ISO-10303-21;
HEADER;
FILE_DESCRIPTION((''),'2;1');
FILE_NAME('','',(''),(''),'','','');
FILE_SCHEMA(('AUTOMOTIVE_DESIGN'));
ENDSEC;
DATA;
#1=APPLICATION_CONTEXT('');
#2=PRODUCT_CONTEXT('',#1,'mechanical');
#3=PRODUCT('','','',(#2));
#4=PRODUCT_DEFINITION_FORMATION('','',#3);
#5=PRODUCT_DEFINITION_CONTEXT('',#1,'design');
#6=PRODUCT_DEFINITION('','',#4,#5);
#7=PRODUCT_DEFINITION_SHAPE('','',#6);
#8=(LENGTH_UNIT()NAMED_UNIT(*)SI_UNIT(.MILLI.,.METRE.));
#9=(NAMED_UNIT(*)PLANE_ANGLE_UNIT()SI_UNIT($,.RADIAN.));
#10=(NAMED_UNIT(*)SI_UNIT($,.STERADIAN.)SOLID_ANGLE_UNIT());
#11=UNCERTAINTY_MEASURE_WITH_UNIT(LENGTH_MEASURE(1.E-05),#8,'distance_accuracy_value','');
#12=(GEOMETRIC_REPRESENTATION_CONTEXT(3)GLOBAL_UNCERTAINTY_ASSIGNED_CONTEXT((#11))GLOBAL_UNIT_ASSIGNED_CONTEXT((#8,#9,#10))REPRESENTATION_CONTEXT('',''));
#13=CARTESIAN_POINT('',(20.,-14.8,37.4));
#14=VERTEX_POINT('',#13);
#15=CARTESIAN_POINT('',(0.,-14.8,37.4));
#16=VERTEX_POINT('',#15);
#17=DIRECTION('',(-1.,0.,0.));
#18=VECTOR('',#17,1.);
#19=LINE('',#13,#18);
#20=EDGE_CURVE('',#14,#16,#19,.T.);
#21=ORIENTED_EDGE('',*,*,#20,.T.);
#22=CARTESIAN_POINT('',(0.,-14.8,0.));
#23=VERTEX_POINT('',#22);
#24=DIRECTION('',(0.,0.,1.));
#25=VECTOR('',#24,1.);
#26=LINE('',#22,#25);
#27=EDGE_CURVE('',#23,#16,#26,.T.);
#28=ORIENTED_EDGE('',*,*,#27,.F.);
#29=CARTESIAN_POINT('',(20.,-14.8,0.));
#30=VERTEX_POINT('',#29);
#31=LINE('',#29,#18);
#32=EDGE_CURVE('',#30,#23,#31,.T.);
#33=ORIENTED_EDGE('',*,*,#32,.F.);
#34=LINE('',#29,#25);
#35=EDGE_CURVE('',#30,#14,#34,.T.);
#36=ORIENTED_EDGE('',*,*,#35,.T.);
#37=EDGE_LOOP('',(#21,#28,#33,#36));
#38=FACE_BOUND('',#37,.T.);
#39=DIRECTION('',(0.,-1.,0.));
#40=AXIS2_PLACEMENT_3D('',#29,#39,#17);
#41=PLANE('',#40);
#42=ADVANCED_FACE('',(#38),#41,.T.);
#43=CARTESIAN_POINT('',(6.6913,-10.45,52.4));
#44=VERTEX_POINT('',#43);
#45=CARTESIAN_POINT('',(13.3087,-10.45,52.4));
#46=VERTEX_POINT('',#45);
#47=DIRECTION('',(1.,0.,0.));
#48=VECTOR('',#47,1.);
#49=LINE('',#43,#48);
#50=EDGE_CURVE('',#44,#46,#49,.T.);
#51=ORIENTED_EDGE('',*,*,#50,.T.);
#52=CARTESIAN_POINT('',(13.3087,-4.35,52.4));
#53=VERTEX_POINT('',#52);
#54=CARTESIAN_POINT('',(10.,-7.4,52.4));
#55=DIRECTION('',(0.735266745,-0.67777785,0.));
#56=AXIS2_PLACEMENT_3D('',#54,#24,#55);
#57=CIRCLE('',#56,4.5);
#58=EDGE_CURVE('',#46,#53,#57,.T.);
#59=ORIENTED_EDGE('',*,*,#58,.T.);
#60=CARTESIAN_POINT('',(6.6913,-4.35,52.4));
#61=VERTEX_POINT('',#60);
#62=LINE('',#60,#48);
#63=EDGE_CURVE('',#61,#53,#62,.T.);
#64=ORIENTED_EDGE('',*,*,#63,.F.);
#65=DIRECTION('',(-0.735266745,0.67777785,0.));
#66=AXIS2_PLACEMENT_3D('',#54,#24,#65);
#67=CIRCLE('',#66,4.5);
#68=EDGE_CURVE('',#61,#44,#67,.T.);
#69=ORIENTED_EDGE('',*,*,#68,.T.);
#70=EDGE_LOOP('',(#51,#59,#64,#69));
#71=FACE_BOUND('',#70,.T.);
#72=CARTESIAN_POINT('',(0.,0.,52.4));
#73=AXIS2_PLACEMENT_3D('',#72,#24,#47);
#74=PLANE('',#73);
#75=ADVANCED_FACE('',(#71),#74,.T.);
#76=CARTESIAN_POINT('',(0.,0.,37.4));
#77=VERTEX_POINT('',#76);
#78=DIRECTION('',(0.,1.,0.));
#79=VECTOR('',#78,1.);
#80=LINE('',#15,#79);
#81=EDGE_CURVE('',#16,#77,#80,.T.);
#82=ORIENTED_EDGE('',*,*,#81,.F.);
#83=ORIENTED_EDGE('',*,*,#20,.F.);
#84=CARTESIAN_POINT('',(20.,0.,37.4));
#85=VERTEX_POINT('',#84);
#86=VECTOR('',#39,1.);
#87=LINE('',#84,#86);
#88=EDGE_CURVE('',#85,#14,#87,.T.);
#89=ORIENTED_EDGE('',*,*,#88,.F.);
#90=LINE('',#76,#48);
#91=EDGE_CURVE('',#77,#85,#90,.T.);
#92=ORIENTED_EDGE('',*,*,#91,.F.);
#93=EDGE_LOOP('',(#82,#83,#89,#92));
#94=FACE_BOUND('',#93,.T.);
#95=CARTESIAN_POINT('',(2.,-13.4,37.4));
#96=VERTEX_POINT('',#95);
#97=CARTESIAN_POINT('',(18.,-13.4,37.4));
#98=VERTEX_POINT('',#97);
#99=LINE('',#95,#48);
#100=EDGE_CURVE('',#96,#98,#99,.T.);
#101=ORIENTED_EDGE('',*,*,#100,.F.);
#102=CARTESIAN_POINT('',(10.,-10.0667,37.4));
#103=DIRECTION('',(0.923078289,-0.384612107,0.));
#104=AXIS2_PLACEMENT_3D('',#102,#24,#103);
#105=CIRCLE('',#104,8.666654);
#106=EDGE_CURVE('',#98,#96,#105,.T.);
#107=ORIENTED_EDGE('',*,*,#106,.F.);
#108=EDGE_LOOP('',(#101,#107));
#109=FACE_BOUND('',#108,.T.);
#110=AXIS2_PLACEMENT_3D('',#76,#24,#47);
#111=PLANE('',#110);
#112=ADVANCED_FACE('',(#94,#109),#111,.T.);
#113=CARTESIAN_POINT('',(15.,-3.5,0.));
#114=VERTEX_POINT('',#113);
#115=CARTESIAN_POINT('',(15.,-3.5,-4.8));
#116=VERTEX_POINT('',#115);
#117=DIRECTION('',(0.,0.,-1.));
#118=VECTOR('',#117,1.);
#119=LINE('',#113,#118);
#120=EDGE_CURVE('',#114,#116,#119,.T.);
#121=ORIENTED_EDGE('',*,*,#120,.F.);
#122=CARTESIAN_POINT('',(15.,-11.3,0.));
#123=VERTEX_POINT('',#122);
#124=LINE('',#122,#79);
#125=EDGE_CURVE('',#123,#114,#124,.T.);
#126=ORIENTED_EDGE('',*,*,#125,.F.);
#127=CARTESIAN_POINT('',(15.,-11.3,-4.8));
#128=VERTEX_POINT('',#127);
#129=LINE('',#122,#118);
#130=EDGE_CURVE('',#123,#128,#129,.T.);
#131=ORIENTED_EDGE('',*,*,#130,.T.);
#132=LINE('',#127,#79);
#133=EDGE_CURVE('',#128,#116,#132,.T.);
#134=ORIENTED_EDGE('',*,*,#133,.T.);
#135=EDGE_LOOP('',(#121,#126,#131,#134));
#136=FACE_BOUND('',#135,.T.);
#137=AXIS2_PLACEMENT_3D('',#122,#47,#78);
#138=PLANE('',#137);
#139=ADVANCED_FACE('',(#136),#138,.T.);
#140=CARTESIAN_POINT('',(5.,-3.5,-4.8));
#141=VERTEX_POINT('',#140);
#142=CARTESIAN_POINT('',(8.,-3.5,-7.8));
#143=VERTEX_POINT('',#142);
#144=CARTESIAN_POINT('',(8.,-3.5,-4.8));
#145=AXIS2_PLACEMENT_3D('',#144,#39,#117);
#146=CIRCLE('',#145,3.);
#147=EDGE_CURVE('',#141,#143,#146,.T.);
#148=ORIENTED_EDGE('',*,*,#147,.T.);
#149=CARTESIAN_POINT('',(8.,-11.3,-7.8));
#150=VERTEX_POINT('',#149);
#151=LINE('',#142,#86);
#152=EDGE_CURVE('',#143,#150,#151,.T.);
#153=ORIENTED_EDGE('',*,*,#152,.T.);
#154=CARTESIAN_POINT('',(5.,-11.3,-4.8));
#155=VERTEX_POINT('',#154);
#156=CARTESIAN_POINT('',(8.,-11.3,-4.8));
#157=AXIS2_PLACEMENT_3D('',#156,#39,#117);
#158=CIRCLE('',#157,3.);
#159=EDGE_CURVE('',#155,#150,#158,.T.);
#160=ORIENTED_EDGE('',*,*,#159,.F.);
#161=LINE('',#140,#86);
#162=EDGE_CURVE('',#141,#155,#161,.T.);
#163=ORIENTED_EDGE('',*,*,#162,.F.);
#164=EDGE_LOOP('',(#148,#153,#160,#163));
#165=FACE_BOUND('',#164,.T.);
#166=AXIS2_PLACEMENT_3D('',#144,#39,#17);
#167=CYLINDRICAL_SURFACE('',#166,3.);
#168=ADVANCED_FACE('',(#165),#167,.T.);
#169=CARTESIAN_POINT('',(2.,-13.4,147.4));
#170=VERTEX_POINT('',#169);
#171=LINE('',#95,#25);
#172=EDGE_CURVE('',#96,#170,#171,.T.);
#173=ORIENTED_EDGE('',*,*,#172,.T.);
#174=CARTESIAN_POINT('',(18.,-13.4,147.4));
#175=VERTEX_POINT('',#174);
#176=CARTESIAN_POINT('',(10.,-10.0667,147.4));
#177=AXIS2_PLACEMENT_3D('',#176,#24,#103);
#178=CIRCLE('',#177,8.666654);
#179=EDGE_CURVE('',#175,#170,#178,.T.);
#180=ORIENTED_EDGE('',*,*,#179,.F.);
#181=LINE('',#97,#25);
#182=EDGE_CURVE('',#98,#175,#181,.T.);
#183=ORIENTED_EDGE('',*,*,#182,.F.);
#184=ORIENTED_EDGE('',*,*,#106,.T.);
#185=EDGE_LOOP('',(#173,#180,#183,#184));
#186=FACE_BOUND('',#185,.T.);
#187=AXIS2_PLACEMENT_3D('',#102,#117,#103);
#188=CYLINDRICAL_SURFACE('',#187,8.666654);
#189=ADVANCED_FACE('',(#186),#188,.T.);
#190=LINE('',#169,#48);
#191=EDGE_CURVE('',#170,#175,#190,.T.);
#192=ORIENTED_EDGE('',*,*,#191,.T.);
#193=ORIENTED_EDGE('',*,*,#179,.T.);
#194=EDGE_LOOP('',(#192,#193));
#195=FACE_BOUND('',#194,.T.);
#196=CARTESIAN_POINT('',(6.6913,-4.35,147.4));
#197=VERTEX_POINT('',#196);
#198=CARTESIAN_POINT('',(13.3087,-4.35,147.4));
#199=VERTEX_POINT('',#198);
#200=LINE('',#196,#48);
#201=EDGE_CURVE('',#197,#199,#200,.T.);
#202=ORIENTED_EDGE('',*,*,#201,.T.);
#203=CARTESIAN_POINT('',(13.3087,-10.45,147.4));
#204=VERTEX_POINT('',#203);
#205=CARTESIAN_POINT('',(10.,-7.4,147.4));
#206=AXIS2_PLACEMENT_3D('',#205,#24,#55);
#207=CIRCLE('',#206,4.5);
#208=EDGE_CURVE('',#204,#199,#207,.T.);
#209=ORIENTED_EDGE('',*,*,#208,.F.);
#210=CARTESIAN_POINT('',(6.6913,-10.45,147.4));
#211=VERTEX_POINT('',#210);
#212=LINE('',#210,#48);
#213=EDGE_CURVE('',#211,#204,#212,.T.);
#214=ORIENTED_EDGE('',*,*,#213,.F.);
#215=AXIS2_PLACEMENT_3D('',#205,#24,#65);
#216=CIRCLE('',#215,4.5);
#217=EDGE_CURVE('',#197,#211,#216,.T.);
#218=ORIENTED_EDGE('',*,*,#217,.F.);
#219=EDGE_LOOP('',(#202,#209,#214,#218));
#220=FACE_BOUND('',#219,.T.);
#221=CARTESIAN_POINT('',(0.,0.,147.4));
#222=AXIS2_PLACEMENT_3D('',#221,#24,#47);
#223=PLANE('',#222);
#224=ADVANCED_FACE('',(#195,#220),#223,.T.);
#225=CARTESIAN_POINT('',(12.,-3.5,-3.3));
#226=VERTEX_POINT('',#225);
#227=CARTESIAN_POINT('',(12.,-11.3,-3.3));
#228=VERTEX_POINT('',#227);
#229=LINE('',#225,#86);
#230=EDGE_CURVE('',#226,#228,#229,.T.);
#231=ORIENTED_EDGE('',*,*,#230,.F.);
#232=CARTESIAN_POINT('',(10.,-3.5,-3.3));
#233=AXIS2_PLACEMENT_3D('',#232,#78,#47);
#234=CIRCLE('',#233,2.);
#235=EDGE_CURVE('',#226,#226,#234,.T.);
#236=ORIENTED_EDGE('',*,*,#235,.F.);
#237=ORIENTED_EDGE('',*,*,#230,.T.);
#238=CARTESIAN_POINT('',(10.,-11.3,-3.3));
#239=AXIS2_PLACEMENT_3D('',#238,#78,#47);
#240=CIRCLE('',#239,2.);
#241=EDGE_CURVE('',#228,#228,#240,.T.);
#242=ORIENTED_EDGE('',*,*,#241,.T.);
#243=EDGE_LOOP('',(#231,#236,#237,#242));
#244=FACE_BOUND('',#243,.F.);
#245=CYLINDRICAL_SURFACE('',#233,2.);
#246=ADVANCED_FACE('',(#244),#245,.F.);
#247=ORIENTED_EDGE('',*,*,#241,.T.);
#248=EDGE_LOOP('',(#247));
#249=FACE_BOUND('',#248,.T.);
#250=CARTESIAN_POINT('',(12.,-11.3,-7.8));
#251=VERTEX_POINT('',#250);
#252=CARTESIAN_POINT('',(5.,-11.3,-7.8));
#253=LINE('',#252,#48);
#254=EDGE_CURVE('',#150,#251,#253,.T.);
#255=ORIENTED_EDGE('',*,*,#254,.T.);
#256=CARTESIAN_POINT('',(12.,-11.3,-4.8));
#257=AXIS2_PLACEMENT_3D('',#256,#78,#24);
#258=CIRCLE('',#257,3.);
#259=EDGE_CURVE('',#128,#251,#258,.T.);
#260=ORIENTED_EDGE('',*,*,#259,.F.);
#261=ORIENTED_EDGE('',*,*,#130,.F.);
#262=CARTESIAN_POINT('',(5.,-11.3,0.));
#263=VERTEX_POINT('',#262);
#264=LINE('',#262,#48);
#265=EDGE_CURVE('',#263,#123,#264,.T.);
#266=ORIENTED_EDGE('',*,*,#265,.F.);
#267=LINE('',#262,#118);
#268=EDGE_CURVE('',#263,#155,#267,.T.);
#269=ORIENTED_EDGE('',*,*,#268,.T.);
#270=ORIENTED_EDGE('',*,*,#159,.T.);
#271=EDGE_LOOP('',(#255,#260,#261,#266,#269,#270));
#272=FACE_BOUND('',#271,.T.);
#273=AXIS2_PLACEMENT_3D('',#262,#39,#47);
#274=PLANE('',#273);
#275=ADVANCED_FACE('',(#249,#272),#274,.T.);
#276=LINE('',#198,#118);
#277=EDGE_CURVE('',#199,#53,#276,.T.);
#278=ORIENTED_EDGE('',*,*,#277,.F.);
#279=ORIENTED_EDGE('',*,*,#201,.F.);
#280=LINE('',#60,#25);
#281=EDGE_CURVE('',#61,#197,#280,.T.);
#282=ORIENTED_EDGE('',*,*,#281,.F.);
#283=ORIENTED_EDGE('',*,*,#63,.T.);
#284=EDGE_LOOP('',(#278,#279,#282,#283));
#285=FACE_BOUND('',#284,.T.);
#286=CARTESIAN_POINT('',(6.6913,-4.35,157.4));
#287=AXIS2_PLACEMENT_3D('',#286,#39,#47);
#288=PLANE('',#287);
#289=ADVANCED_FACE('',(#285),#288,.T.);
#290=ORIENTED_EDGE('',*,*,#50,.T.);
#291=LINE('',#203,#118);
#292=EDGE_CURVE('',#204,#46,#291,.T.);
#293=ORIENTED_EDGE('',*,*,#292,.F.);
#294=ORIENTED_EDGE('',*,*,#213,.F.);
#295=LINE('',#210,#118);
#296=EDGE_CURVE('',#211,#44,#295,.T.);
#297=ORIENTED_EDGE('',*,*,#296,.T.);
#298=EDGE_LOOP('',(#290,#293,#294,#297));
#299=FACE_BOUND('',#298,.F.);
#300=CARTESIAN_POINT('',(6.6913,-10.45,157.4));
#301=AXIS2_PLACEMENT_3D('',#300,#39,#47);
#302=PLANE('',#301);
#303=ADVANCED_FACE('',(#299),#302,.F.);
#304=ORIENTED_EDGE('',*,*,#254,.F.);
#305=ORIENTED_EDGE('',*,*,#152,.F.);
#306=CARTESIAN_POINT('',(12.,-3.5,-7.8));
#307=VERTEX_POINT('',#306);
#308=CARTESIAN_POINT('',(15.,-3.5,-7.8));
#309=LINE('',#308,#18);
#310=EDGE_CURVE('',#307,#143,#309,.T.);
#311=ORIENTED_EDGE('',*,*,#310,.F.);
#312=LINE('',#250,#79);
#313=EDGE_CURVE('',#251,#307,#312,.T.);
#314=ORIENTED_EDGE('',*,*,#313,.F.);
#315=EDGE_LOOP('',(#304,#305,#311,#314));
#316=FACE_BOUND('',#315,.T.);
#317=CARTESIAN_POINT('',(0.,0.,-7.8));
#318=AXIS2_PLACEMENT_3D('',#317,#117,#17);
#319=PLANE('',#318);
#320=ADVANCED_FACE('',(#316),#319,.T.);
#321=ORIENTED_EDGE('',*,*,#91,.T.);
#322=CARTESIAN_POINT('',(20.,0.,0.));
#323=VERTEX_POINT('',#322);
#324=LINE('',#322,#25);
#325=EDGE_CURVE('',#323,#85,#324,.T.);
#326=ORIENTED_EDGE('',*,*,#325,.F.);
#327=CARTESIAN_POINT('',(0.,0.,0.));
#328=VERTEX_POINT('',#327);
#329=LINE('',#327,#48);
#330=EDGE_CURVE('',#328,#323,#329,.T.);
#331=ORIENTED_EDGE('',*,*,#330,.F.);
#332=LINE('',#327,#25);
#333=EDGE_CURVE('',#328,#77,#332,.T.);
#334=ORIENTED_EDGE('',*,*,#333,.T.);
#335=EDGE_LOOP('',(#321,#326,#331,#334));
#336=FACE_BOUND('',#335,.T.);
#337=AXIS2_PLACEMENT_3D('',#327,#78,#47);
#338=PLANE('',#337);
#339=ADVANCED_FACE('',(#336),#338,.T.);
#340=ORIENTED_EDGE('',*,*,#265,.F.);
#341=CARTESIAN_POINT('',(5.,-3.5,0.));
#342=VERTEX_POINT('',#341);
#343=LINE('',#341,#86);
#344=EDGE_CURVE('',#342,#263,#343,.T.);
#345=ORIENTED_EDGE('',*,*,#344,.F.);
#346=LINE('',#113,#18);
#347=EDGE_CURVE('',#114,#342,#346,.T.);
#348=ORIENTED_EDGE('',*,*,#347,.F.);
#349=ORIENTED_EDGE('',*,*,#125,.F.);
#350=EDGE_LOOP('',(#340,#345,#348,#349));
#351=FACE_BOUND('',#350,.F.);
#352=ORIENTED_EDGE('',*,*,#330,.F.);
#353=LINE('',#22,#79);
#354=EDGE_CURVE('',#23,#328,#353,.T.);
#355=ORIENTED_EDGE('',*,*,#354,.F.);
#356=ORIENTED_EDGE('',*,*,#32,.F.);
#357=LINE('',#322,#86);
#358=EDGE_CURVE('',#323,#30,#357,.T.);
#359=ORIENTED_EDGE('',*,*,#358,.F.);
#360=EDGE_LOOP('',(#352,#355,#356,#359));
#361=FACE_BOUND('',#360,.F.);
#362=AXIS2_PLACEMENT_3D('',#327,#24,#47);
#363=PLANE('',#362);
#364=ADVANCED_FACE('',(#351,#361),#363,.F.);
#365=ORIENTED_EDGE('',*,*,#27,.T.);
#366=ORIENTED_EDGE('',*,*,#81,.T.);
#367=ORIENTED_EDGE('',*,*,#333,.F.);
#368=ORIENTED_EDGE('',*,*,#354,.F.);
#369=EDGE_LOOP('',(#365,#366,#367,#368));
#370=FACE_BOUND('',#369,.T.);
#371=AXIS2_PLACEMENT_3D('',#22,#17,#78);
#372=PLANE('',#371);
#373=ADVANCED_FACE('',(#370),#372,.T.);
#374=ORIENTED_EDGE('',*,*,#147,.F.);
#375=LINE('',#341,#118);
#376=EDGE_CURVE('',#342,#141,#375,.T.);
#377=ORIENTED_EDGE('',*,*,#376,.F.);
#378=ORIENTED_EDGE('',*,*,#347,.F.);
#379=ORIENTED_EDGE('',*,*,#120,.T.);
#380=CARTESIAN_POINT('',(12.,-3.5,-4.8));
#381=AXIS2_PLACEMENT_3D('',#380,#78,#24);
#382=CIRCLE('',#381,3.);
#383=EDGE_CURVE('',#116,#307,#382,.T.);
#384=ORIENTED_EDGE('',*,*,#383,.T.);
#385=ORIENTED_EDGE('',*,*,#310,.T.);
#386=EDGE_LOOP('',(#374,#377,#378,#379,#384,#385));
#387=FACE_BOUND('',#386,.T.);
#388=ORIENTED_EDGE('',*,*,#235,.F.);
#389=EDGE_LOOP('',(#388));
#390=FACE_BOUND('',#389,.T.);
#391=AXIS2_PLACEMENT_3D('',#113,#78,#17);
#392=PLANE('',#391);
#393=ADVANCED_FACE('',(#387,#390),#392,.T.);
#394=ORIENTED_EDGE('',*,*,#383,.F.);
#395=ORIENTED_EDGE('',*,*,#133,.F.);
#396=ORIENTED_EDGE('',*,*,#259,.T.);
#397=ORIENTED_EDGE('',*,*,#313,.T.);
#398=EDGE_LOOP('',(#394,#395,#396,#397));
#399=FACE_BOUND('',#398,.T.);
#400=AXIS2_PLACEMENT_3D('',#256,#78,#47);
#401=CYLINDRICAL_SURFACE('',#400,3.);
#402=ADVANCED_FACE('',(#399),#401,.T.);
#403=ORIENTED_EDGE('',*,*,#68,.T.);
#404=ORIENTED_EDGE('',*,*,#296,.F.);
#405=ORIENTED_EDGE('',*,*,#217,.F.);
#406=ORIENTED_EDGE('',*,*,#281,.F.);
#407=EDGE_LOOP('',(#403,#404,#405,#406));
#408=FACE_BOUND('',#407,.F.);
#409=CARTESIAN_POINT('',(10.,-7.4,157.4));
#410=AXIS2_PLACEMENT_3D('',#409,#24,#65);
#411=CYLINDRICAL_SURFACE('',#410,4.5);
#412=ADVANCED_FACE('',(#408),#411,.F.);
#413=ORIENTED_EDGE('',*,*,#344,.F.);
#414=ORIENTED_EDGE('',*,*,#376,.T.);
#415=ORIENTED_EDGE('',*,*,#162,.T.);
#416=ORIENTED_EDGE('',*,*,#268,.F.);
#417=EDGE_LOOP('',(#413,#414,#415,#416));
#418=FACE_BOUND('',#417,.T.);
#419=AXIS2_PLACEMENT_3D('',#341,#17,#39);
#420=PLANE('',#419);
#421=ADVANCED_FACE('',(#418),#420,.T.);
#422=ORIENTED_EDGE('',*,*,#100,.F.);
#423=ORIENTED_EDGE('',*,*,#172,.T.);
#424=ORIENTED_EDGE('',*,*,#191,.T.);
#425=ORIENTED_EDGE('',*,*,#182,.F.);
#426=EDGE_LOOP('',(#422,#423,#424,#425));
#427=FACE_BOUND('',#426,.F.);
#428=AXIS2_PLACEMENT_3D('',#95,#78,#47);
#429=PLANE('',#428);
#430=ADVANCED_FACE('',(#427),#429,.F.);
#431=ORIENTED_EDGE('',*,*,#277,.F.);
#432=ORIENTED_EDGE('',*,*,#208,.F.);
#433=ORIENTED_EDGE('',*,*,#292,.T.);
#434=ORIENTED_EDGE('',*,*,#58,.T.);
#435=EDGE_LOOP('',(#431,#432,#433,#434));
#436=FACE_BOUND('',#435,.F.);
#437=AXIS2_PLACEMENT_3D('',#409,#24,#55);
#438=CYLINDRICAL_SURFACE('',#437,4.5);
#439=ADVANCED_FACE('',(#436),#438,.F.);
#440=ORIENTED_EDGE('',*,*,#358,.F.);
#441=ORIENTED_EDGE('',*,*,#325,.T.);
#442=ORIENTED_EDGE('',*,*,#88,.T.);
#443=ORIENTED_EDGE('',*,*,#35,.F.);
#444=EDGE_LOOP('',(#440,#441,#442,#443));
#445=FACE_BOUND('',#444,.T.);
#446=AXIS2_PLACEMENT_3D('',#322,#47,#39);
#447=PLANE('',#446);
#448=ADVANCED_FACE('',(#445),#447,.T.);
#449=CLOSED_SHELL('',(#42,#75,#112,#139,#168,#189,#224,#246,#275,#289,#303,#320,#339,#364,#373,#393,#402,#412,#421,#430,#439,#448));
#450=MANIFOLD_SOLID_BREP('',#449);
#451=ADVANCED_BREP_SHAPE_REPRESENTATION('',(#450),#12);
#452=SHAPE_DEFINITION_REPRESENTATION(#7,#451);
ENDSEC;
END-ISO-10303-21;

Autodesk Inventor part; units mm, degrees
ref_plane "YZ Plane" through (0, 0, 0) normal (1, 0, 0) x (0, 1, 0)
ref_plane "XZ Plane" through (0, 0, 0) normal (0, 1, 0) x (-1, 0, 0)
ref_plane "XY Plane" through (0, 0, 0) normal (0, 0, 1) x (1, 0, 0)
sketch "Sketch1" plane through (0, 0, 0) normal (0, 0, 1) x (1, 0, 0)
  line L0 (0, 0) -> (20, 0)
  line L1 (20, 0) -> (20, -14.8)
  line L2 (20, -14.8) -> (0, -14.8)
  line L3 (0, -14.8) -> (0, 0)
  dimension "d0" = 20
  dimension "d1" = 14.8
extrude "Extrusion1" add sketch "Sketch1" along normal blind 37.4
sketch "Sketch2" plane through (0, 0, 37.4) normal (0, 0, 1) x (1, 0, 0)
  line L0 (0, 0) -> (0, -14.8) projected
  line L1 (20, 0) -> (0, 0) projected
  line L2 (2, -13.4) -> (18, -13.4)
  arc A0 (18, -13.4) -> (2, -13.4) centre (10, -10.0667) ccw
  point P0 (10, -7.4)
  point P1 (10, -13.4)
extrude "Extrusion2" add sketch "Sketch2" along normal blind 120
sketch "Sketch3" plane through (0, 0, 157.4) normal (0, 0, 1) x (1, 0, 0)
  arc A0 (18, -13.4) -> (2, -13.4) centre (10, -10.0667) ccw projected
  line L0 (2, -13.4) -> (18, -13.4) projected
  line L1 (2, -13.4) -> (2, -13.4)
  line L2 (2, -13.4) -> (2, -13.4) construction
  line L3 (10, -13.4) -> (22, -13.4) construction
  line L4 (18, -13.4) -> (2, -13.4) projected
  line L5 (0, -14.8) -> (20, -14.8) projected
  line L6 (6.6913, -4.35) -> (13.3087, -4.35)
  line L7 (6.6913, -10.45) -> (13.3087, -10.45)
  arc A1 (6.6913, -4.35) -> (6.6913, -10.45) centre (10, -7.4) ccw
  arc A2 (13.3087, -10.45) -> (13.3087, -4.35) centre (10, -7.4) ccw
  point P0 (0, 0)
  dimension "d12" = 90
extrude "Extrusion3" add sketch "Sketch3" along normal blind 9.3 contours L6 A2 L7 A1
sketch "Sketch4" plane through (6.6913, -4.35, 157.4) normal (0, 1, 0) x (1, 0, 0)
  circle A0 centre (3.3087, -4.5) radius 2
  line L0 (-5.358, 0) -> (11.9754, 0) projected
  point P0 (-6.6913, 157.4)
  point P1 (11.3087, 0)
  point P2 (-4.6913, 0)
  dimension "d21" = 4
  dimension "d22" = 4.5
extrude "Extrusion4" cut sketch "Sketch4" against normal through all
sketch "Sketch5" plane through (0, 0, 0) normal (0, 0, -1) x (-1, 0, 0)
  line L0 (-15, -3.5) -> (-5, -3.5)
  line L1 (-5, -3.5) -> (-5, -11.3)
  line L2 (-5, -11.3) -> (-15, -11.3)
  line L3 (-15, -11.3) -> (-15, -3.5)
  line L4 (-15, -3.5) -> (-5, -11.3) construction
  line L5 (-5, -3.5) -> (-15, -11.3) construction
  line L6 (-20, 0) -> (0, 0) projected
  line L7 (0, -14.8) -> (-20, -14.8) projected
  line L8 (0, 0) -> (0, -14.8) projected
  line L9 (-20, 0) -> (0, 0) projected
  line L10 (-20, -14.8) -> (-20, 0) projected
  point P0 (-10, -7.4)
  point P1 (0, -7.4)
  point P2 (-10, -7.4)
  dimension "d25" = 7.8
  dimension "d26" = 10
  dimension "d27" = 10
extrude "Extrusion5" add sketch "Sketch5" along normal blind 7.8 contours L0 L1 L2 L3
sketch "Sketch6" plane through (5, -3.5, 0) normal (0, 1, 0) x (1, 0, 0)
  circle A0 centre (5, 3.3) radius 2
  line L0 (0, 7.8) -> (10, 7.8) projected
  line L1 (0, 0) -> (0, 7.8) projected
  point P0 (-5, 0)
  point P1 (5, 7.8)
  dimension "d30" = 4
  dimension "d31" = 4.5
  dimension "d32" = 5
extrude "Extrusion6" cut sketch "Sketch6" against normal through all
fillet "Fillet1" radius 3 2 edges at (15, -7.4, -7.8) (5, -7.4, -7.8)
ref_plane "작업 평면1" through (0, 0, 157.4) normal (0, 0, 1) x (1, 0, 0)
extrude "돌출7" cut sketch "Sketch3" against normal blind 100 contours L6 A2 L7 A1
split "분할1" plane through (0, 0, 157.4) removes the side toward (0, 0, 1)
sketch "스케치7" plane through (0, 0, 166.7) normal (0, 0, 1) x (1, 0, 0)
  point P0 (0, 0)
move faces "이동2" translate (0, 0, -10) faces at (8.8971, -12.4167, 157.4)
move faces "이동7" translate (0, 0, -5) faces at (11.454, -8.4605, 57.4)
properties part number "Actuator Body"
